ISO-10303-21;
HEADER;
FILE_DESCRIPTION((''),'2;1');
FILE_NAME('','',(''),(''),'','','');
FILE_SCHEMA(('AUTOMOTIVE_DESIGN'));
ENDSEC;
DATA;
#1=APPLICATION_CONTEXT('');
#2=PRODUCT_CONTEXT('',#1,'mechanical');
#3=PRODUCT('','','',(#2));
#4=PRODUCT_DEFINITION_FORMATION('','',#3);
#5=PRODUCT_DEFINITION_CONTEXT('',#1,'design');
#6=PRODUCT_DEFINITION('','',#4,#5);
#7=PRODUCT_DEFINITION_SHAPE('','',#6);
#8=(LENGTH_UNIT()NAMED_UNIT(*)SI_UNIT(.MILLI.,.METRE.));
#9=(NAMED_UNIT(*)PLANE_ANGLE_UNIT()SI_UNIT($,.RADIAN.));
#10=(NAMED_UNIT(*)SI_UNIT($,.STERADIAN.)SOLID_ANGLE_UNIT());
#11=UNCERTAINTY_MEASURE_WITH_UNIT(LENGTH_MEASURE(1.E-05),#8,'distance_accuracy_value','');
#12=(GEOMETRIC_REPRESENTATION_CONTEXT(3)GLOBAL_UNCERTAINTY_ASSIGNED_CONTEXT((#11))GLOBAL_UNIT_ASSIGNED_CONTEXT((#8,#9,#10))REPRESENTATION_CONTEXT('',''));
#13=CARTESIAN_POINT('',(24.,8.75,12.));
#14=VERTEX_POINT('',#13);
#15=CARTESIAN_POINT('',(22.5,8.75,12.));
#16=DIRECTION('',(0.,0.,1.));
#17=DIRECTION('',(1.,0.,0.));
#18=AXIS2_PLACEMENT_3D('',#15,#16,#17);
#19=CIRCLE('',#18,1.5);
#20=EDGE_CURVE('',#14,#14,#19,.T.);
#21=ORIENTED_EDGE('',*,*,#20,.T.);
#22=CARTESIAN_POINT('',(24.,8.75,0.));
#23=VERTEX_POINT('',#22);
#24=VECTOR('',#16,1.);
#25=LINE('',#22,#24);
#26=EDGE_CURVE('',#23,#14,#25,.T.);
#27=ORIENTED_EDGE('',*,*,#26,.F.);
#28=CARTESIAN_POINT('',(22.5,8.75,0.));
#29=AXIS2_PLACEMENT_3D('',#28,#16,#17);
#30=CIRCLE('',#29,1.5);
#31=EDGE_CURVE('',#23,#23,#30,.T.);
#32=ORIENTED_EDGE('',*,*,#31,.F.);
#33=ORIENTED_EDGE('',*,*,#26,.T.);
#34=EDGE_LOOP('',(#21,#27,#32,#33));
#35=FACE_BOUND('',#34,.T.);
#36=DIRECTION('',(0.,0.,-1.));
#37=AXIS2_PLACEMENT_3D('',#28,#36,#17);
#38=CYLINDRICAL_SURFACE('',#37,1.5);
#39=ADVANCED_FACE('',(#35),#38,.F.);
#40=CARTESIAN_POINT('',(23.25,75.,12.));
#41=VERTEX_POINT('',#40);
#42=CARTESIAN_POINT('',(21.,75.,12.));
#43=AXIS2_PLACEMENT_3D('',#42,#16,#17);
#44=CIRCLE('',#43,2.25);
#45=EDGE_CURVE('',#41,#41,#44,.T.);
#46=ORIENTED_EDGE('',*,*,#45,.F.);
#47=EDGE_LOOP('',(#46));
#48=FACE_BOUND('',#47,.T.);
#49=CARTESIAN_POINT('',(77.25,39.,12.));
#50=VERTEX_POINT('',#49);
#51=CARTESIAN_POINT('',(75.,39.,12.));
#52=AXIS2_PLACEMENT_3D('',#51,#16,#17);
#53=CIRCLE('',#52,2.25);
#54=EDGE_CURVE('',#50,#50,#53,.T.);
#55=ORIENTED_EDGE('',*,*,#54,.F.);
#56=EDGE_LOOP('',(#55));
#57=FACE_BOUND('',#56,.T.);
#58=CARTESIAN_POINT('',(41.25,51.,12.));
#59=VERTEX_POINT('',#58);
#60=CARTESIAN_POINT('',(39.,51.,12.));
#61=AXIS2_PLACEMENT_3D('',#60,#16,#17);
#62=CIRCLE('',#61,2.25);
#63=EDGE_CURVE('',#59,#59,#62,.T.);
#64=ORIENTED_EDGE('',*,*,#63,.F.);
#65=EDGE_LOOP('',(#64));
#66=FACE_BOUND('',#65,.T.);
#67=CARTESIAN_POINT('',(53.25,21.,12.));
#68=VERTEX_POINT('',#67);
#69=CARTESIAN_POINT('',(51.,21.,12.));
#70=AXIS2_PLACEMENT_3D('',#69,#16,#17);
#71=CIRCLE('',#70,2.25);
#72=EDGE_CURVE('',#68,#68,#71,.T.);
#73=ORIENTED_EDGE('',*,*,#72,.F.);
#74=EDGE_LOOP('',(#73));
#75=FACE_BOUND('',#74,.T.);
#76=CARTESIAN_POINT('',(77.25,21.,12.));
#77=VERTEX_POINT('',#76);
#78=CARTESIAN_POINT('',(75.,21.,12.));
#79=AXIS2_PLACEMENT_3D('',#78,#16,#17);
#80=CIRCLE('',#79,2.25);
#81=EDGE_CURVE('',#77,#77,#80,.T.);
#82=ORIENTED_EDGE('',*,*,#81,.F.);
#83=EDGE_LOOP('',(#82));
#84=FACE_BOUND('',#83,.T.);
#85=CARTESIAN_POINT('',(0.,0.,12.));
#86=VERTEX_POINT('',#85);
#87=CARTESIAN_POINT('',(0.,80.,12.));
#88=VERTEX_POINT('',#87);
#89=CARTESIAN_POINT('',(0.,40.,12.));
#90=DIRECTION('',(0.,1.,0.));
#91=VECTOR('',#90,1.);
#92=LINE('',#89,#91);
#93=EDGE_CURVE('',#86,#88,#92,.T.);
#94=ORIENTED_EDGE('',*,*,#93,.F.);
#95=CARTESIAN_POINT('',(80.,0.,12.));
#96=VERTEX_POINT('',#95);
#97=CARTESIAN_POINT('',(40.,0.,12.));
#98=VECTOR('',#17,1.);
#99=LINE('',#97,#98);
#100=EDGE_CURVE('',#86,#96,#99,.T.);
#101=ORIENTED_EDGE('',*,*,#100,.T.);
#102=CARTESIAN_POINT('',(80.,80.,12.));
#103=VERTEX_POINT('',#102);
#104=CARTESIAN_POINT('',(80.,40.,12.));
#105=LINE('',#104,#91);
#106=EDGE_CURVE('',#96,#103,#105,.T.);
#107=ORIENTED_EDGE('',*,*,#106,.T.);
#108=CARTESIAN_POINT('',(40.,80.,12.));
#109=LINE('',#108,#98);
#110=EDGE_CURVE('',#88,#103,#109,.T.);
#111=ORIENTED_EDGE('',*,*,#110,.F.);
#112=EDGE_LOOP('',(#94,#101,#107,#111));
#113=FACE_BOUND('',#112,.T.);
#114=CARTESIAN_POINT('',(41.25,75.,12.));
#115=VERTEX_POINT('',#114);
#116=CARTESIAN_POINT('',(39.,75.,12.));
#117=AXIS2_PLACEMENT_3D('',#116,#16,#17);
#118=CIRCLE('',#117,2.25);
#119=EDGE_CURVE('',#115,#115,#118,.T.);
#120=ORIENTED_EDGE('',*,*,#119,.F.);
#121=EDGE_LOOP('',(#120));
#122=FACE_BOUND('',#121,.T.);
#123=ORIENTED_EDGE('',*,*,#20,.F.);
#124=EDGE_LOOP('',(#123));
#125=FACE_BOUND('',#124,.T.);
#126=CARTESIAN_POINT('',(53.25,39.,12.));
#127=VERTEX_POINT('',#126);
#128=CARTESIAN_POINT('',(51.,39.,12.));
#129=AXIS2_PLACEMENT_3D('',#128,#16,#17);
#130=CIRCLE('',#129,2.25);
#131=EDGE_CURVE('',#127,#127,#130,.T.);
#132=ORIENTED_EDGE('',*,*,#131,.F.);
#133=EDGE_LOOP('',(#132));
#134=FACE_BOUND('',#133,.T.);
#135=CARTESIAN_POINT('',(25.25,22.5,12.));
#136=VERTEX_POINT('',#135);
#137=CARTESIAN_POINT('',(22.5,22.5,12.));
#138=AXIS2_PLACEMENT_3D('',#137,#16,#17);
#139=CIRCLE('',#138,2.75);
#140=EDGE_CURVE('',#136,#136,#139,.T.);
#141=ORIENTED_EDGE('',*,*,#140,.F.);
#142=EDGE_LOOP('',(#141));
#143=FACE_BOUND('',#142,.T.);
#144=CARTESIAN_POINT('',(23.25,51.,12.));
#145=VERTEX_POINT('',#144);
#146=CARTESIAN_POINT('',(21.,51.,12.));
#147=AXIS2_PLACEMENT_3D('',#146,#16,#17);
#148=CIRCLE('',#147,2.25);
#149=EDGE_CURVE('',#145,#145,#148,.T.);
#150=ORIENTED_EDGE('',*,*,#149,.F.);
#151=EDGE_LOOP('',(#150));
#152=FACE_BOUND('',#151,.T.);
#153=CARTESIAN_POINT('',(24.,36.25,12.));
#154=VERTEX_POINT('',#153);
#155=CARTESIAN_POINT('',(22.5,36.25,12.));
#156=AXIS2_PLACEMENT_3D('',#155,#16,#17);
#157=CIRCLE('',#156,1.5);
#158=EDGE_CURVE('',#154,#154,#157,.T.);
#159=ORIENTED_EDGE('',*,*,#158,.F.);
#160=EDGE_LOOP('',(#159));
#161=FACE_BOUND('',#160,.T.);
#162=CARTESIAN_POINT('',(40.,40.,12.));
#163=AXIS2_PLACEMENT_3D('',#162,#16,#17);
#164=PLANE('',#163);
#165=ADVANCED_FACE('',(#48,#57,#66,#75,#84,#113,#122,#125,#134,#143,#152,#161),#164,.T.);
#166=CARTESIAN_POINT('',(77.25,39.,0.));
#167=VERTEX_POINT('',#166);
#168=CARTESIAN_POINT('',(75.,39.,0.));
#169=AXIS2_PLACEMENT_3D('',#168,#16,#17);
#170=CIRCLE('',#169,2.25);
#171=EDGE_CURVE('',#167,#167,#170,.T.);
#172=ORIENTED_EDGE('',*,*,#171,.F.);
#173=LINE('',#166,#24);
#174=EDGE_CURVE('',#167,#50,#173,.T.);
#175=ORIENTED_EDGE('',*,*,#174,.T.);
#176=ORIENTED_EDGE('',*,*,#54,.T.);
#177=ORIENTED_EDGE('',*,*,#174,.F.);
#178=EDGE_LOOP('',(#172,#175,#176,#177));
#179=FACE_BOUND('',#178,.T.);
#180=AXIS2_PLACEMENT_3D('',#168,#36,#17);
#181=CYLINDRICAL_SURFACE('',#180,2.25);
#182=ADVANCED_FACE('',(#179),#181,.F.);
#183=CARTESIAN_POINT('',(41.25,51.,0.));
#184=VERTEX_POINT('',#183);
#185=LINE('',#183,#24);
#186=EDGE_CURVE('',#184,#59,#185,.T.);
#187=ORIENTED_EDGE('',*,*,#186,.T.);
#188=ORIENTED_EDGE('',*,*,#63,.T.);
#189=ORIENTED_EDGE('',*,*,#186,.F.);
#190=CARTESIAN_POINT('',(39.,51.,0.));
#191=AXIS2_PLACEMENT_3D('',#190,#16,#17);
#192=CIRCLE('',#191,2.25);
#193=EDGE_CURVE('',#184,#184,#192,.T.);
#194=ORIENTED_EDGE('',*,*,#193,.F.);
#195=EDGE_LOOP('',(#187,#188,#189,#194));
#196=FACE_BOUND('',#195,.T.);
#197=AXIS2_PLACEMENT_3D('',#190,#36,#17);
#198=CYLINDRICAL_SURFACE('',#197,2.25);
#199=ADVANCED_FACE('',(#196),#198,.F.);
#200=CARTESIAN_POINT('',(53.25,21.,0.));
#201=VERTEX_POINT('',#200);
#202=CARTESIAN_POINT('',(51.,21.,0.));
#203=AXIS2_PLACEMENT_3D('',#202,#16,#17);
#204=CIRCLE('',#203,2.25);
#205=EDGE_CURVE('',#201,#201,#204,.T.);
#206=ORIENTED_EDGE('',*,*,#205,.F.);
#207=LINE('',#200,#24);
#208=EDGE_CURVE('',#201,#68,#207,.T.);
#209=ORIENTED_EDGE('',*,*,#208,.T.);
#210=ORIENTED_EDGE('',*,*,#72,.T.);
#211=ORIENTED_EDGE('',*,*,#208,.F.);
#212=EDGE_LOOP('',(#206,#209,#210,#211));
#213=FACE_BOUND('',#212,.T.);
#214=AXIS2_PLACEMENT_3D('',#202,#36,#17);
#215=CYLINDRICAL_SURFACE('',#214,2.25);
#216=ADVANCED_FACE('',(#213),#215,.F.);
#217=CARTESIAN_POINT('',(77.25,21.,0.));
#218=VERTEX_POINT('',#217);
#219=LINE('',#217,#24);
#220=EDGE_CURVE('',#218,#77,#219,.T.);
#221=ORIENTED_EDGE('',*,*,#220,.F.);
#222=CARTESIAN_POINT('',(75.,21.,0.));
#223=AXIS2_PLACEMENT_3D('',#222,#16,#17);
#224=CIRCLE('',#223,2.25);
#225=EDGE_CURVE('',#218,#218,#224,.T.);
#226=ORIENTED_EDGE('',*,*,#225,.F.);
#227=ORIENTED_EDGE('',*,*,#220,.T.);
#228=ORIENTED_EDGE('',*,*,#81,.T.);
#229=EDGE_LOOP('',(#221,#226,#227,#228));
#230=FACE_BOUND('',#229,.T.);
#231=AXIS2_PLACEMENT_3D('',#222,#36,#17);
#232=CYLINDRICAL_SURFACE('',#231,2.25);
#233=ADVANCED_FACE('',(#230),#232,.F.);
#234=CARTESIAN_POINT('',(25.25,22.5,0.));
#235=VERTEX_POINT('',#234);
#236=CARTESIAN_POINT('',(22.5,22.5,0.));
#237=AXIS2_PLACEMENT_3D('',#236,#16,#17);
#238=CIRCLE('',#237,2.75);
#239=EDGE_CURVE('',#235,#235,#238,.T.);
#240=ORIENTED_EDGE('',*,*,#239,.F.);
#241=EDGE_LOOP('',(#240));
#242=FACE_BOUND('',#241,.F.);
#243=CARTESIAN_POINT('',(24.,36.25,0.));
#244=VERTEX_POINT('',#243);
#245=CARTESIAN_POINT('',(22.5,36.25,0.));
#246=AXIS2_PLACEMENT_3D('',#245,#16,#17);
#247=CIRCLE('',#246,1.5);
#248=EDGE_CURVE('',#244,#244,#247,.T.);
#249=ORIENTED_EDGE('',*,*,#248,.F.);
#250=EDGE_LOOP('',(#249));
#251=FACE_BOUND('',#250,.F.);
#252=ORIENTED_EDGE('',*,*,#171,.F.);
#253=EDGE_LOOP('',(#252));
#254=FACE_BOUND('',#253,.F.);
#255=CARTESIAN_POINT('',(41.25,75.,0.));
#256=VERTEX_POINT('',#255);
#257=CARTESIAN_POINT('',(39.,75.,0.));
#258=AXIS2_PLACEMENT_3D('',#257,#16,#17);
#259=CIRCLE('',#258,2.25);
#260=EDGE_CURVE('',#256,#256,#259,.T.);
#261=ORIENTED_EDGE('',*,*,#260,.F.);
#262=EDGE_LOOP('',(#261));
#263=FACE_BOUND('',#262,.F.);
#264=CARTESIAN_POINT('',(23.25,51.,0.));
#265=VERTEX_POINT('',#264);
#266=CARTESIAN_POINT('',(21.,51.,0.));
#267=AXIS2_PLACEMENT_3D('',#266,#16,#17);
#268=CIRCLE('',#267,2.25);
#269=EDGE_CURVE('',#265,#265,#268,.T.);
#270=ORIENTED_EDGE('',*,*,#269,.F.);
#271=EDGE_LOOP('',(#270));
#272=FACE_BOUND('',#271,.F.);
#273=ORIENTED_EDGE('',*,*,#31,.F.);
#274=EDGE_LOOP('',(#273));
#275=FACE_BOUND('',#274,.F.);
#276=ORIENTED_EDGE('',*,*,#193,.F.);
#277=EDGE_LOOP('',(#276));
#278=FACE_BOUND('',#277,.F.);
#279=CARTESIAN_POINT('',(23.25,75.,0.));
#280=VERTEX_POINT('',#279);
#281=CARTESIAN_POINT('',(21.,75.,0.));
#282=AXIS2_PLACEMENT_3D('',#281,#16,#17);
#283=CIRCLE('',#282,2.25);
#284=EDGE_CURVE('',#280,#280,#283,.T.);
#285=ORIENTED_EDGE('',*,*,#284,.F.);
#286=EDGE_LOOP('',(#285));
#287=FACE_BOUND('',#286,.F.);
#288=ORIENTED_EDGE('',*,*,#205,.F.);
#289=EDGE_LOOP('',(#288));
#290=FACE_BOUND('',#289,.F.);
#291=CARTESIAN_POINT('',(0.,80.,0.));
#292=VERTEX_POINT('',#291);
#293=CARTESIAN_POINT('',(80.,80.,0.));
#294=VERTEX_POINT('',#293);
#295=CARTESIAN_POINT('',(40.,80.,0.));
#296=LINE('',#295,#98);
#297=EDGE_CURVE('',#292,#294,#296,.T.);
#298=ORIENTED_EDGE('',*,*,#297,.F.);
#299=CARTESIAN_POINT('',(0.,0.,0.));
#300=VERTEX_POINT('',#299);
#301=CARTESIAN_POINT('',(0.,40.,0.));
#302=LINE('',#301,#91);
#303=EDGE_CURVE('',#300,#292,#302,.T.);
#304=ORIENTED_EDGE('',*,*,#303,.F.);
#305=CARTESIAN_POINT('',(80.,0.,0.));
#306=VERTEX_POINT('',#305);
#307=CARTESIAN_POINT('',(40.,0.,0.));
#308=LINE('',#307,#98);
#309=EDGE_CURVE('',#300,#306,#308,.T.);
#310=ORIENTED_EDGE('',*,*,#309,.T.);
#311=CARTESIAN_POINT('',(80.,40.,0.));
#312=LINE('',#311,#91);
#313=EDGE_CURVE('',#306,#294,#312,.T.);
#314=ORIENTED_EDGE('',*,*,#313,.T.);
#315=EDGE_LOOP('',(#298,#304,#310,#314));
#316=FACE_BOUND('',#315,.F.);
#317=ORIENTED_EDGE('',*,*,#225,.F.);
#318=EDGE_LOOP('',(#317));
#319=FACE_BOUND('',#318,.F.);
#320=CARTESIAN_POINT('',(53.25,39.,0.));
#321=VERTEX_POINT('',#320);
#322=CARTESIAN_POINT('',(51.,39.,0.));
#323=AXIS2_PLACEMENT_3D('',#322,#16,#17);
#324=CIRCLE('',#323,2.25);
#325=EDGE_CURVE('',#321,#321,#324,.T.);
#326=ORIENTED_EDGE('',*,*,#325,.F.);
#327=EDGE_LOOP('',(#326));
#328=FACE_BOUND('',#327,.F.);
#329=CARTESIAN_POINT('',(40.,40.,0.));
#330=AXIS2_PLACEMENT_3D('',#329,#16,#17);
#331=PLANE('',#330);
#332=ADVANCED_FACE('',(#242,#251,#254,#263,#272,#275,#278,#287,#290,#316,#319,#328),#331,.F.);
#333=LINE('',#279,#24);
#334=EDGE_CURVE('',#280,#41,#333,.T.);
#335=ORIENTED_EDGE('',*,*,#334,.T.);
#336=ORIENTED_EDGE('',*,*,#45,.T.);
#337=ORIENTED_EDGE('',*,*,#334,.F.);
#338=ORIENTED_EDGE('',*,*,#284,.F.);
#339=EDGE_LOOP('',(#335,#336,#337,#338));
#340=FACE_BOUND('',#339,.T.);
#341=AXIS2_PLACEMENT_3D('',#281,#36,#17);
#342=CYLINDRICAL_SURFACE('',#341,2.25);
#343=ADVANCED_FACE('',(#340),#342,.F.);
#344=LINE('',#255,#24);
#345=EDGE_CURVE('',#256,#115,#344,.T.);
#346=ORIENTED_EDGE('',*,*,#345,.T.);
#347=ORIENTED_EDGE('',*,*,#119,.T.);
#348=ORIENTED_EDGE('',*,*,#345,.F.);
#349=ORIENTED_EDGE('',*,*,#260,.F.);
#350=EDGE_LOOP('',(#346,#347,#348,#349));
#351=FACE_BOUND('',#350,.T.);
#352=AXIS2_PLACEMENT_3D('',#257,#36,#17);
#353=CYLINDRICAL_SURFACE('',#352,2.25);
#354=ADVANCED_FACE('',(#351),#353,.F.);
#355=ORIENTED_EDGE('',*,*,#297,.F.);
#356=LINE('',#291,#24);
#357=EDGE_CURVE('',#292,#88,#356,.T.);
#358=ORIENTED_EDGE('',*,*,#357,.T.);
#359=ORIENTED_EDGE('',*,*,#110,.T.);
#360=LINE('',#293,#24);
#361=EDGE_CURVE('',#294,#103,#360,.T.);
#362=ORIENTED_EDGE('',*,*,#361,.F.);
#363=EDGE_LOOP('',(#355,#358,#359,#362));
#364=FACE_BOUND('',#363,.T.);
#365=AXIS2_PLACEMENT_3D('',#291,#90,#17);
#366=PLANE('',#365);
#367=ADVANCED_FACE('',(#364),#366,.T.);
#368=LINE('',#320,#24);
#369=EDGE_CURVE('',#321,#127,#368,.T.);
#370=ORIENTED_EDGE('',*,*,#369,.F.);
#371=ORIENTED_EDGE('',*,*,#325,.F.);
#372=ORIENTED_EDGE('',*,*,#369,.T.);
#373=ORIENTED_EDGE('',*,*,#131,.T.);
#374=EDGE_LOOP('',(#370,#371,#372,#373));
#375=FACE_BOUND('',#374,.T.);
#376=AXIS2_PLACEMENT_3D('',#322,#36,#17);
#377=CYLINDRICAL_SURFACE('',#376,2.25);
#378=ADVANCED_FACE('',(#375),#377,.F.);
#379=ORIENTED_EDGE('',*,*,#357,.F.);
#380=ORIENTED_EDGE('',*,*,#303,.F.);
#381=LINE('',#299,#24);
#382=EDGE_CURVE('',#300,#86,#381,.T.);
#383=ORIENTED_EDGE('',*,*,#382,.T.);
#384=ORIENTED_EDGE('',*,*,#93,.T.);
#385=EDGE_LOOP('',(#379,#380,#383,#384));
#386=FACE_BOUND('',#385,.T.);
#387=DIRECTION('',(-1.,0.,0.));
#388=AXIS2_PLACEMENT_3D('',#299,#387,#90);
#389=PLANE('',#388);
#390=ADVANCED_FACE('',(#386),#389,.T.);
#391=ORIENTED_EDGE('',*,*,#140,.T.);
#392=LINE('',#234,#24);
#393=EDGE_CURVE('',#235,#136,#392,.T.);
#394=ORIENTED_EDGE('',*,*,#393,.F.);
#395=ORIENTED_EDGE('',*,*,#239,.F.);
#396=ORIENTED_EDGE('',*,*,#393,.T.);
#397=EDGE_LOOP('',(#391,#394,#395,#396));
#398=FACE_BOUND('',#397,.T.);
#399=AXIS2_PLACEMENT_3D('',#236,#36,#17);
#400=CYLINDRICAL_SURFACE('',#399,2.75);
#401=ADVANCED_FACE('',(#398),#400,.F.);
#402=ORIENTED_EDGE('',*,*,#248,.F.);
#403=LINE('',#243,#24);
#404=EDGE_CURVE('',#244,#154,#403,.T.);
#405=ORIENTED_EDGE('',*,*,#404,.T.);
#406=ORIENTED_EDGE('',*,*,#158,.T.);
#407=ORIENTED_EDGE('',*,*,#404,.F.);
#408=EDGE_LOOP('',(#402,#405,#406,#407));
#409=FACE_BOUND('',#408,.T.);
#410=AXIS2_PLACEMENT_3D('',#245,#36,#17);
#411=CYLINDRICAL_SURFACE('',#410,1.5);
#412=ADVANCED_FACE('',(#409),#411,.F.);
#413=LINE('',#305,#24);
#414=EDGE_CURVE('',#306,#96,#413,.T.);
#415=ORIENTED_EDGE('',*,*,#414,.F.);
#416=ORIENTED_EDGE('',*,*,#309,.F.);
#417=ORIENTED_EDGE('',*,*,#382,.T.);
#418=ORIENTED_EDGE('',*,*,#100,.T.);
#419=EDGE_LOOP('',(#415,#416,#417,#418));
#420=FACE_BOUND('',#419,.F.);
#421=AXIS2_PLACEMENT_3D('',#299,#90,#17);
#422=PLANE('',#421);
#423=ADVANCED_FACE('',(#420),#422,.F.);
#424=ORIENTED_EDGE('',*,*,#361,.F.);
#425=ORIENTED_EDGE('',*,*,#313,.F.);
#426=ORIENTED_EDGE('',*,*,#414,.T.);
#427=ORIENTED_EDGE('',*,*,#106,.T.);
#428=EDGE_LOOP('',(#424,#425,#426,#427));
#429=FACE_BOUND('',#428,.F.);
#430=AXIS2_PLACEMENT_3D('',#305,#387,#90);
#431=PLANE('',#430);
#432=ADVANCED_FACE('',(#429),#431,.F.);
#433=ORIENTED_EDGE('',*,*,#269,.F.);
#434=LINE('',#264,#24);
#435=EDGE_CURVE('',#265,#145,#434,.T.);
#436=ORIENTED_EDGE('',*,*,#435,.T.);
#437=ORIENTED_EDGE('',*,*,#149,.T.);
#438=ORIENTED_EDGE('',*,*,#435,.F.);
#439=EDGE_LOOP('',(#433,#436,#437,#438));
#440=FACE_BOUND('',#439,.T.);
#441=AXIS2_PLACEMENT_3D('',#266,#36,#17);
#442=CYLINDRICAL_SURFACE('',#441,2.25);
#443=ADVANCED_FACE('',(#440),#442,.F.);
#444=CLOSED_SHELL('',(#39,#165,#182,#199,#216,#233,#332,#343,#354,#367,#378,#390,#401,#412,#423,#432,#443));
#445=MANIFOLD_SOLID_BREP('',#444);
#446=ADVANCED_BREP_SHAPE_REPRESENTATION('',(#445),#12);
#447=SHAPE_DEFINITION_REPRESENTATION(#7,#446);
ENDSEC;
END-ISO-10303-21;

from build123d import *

# Parameters (mm, degrees)
F0_W     = 80
F0_H     = 80
F0_R     = 1.5
F0_R_2   = 2.75
F0_R_3   = 2.25
F1_DEPTH = 12


with BuildPart() as f1:
    # F0 (on Top) → F1 (new body)
    with BuildSketch(Plane.XY):
        with Locations((40, 40)):
            Rectangle(F0_W, F0_H)
        with Locations((22.5, 8.75)):
            Circle(F0_R, mode=Mode.SUBTRACT)
        with Locations((22.5, 22.5)):
            Circle(F0_R_2, mode=Mode.SUBTRACT)
        with Locations((22.5, 36.25)):
            Circle(F0_R, mode=Mode.SUBTRACT)
        with Locations((51, 21)):
            Circle(F0_R_3, mode=Mode.SUBTRACT)
        with Locations((51, 39)):
            Circle(F0_R_3, mode=Mode.SUBTRACT)
        with Locations((75, 21)):
            Circle(F0_R_3, mode=Mode.SUBTRACT)
        with Locations((75, 39)):
            Circle(F0_R_3, mode=Mode.SUBTRACT)
        with Locations((21, 51)):
            Circle(F0_R_3, mode=Mode.SUBTRACT)
        with Locations((39, 51)):
            Circle(F0_R_3, mode=Mode.SUBTRACT)
        with Locations((21, 75)):
            Circle(F0_R_3, mode=Mode.SUBTRACT)
        with Locations((39, 75)):
            Circle(F0_R_3, mode=Mode.SUBTRACT)
    extrude(amount=F1_DEPTH)


solid = f1.part
